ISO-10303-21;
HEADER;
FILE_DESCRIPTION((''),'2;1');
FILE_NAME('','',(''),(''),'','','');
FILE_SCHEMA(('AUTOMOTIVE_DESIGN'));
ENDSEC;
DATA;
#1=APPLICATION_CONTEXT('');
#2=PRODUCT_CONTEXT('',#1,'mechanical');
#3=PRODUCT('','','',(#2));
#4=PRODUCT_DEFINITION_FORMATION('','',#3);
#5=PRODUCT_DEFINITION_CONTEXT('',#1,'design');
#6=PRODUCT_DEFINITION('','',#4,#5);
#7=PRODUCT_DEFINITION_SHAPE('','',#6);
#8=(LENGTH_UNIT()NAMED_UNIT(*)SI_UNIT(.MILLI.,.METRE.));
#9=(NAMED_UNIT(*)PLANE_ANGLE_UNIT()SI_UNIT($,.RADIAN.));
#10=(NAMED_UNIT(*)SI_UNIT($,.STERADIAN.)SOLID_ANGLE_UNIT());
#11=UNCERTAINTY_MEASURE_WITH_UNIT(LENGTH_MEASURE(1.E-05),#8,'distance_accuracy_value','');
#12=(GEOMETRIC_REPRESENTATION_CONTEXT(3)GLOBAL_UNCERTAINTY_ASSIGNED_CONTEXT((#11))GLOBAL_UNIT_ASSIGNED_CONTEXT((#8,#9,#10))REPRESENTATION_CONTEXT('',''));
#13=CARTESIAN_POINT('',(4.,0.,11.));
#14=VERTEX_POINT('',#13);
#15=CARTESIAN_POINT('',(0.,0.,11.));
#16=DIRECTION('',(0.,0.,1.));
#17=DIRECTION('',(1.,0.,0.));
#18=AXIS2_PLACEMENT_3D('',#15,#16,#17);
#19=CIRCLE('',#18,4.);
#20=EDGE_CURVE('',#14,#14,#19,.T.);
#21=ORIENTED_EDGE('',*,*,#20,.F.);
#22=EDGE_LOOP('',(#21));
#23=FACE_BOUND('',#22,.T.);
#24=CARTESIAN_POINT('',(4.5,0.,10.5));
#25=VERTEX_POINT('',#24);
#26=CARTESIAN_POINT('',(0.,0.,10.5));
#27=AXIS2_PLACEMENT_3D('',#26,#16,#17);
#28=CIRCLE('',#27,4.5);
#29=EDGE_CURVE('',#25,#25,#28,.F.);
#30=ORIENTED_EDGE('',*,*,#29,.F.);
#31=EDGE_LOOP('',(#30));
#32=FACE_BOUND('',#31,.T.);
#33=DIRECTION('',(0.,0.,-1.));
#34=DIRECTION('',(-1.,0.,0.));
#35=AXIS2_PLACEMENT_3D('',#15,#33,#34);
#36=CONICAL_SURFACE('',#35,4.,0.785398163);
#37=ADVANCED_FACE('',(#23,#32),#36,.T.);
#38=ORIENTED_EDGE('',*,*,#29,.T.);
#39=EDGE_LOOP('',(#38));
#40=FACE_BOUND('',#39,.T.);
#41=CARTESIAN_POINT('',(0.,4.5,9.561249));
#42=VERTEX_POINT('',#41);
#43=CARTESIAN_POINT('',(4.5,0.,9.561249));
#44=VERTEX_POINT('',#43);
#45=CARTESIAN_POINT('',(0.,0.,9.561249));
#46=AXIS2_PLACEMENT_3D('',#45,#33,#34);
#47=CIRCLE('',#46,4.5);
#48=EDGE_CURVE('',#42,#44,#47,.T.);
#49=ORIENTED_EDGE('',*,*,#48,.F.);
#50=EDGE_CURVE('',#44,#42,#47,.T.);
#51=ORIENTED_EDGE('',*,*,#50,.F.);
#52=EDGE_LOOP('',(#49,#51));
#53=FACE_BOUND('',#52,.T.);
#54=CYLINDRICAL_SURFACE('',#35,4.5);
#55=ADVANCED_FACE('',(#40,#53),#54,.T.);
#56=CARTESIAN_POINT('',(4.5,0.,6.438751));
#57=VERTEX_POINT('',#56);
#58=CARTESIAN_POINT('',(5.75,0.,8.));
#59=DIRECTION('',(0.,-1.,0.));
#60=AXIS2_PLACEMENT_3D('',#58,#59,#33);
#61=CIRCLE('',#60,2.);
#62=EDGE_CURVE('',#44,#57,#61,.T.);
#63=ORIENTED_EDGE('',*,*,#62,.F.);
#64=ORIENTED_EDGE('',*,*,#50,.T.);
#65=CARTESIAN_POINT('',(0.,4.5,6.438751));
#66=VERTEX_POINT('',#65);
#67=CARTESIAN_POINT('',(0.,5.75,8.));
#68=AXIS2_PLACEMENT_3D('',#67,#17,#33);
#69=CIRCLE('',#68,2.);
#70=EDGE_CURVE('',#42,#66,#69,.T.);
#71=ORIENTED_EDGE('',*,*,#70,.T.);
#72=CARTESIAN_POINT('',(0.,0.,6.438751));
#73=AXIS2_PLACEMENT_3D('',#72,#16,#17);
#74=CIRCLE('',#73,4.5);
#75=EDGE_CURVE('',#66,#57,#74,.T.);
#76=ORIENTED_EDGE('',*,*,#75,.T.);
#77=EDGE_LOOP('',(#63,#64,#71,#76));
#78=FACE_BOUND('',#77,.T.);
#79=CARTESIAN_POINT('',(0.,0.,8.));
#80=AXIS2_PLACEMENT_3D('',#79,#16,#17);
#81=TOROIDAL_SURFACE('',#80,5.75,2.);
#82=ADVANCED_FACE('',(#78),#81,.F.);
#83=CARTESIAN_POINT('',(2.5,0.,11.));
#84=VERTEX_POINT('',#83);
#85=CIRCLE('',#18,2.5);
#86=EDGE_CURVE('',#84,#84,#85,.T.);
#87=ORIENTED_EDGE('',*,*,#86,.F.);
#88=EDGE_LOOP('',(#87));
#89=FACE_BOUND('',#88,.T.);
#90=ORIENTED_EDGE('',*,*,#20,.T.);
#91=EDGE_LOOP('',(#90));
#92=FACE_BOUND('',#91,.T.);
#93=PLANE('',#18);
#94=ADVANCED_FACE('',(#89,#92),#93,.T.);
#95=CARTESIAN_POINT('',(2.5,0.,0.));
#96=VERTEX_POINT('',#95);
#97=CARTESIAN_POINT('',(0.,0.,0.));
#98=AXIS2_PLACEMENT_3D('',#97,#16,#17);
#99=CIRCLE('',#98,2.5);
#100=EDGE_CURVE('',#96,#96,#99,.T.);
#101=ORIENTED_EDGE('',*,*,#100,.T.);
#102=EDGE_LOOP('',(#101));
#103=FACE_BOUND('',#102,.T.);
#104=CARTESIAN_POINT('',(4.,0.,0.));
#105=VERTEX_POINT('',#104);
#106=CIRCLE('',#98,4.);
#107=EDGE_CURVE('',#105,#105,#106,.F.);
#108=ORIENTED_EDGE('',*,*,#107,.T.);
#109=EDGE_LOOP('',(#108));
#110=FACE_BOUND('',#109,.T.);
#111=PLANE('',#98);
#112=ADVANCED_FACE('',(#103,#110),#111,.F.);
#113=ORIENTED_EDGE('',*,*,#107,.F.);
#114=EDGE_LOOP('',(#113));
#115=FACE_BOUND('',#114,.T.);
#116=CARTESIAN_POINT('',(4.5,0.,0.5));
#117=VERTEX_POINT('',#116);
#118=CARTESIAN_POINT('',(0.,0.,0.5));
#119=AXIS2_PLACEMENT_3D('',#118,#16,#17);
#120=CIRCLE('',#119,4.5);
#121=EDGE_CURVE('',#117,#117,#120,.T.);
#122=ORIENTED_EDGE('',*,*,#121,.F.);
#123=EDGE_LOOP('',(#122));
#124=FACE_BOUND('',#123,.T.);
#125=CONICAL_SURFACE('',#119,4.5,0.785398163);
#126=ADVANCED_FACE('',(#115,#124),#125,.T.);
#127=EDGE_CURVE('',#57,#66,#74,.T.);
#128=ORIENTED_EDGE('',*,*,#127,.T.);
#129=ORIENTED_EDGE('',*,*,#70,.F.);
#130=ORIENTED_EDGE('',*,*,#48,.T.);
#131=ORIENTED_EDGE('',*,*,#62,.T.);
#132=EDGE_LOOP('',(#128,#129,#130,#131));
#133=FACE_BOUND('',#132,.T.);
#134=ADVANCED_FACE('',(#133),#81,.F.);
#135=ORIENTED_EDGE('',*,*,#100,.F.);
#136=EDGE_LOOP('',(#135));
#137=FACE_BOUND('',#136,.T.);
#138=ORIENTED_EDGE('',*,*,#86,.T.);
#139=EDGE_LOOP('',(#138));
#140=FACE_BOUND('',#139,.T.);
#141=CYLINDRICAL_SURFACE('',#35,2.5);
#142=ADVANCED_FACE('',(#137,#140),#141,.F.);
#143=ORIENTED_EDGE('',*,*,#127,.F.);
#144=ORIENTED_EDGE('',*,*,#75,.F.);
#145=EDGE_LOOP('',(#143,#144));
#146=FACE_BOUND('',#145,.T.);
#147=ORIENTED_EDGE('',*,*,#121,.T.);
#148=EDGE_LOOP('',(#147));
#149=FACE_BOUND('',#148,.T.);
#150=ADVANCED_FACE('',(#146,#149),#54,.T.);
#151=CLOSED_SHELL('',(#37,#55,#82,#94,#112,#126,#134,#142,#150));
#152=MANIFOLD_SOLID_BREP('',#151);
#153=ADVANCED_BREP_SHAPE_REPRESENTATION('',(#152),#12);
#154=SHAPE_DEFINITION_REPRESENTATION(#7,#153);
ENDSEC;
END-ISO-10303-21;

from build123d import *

# Parameters (mm, degrees)
CROQUIS1_R              = 4.5
CROQUIS1_R_2            = 2.5
SALIENTE_EXTRUIR1_DEPTH = 11
CHAFL_N1_SIZE           = 0.5


# Read off the part's stored shape, not the designer's step: Cortar-Barrer1
with BuildPart() as part:
    # Croquis1 → Saliente-Extruir1 (new body)
    with BuildSketch(Plane.XY):
        Circle(CROQUIS1_R)
        Circle(CROQUIS1_R_2, mode=Mode.SUBTRACT)
    extrude(amount=SALIENTE_EXTRUIR1_DEPTH)

    # Chaflán1
    chafl_n1_edges = [part.edges().sort_by_distance(p)[0] for p in [
        (-4.5, 0, 0),
        (-4.5, 0, 11),
    ]]
    chamfer(chafl_n1_edges, length=CHAFL_N1_SIZE)

    # Cortar-Barrer1 outline → Cortar-Barrer1 (revolve, cut)
    with BuildSketch(Plane.XZ):
        with BuildLine():
            Line((4.5, 6.4387505), (4.5, 9.5612495))
            ThreePointArc((4.5, 9.5612495), (3.75, 8), (4.5, 6.4387505))
        make_face()
    revolve(axis=Axis((0, 0, 0), (0, 0, 1)), mode=Mode.SUBTRACT)


solid = part.part
